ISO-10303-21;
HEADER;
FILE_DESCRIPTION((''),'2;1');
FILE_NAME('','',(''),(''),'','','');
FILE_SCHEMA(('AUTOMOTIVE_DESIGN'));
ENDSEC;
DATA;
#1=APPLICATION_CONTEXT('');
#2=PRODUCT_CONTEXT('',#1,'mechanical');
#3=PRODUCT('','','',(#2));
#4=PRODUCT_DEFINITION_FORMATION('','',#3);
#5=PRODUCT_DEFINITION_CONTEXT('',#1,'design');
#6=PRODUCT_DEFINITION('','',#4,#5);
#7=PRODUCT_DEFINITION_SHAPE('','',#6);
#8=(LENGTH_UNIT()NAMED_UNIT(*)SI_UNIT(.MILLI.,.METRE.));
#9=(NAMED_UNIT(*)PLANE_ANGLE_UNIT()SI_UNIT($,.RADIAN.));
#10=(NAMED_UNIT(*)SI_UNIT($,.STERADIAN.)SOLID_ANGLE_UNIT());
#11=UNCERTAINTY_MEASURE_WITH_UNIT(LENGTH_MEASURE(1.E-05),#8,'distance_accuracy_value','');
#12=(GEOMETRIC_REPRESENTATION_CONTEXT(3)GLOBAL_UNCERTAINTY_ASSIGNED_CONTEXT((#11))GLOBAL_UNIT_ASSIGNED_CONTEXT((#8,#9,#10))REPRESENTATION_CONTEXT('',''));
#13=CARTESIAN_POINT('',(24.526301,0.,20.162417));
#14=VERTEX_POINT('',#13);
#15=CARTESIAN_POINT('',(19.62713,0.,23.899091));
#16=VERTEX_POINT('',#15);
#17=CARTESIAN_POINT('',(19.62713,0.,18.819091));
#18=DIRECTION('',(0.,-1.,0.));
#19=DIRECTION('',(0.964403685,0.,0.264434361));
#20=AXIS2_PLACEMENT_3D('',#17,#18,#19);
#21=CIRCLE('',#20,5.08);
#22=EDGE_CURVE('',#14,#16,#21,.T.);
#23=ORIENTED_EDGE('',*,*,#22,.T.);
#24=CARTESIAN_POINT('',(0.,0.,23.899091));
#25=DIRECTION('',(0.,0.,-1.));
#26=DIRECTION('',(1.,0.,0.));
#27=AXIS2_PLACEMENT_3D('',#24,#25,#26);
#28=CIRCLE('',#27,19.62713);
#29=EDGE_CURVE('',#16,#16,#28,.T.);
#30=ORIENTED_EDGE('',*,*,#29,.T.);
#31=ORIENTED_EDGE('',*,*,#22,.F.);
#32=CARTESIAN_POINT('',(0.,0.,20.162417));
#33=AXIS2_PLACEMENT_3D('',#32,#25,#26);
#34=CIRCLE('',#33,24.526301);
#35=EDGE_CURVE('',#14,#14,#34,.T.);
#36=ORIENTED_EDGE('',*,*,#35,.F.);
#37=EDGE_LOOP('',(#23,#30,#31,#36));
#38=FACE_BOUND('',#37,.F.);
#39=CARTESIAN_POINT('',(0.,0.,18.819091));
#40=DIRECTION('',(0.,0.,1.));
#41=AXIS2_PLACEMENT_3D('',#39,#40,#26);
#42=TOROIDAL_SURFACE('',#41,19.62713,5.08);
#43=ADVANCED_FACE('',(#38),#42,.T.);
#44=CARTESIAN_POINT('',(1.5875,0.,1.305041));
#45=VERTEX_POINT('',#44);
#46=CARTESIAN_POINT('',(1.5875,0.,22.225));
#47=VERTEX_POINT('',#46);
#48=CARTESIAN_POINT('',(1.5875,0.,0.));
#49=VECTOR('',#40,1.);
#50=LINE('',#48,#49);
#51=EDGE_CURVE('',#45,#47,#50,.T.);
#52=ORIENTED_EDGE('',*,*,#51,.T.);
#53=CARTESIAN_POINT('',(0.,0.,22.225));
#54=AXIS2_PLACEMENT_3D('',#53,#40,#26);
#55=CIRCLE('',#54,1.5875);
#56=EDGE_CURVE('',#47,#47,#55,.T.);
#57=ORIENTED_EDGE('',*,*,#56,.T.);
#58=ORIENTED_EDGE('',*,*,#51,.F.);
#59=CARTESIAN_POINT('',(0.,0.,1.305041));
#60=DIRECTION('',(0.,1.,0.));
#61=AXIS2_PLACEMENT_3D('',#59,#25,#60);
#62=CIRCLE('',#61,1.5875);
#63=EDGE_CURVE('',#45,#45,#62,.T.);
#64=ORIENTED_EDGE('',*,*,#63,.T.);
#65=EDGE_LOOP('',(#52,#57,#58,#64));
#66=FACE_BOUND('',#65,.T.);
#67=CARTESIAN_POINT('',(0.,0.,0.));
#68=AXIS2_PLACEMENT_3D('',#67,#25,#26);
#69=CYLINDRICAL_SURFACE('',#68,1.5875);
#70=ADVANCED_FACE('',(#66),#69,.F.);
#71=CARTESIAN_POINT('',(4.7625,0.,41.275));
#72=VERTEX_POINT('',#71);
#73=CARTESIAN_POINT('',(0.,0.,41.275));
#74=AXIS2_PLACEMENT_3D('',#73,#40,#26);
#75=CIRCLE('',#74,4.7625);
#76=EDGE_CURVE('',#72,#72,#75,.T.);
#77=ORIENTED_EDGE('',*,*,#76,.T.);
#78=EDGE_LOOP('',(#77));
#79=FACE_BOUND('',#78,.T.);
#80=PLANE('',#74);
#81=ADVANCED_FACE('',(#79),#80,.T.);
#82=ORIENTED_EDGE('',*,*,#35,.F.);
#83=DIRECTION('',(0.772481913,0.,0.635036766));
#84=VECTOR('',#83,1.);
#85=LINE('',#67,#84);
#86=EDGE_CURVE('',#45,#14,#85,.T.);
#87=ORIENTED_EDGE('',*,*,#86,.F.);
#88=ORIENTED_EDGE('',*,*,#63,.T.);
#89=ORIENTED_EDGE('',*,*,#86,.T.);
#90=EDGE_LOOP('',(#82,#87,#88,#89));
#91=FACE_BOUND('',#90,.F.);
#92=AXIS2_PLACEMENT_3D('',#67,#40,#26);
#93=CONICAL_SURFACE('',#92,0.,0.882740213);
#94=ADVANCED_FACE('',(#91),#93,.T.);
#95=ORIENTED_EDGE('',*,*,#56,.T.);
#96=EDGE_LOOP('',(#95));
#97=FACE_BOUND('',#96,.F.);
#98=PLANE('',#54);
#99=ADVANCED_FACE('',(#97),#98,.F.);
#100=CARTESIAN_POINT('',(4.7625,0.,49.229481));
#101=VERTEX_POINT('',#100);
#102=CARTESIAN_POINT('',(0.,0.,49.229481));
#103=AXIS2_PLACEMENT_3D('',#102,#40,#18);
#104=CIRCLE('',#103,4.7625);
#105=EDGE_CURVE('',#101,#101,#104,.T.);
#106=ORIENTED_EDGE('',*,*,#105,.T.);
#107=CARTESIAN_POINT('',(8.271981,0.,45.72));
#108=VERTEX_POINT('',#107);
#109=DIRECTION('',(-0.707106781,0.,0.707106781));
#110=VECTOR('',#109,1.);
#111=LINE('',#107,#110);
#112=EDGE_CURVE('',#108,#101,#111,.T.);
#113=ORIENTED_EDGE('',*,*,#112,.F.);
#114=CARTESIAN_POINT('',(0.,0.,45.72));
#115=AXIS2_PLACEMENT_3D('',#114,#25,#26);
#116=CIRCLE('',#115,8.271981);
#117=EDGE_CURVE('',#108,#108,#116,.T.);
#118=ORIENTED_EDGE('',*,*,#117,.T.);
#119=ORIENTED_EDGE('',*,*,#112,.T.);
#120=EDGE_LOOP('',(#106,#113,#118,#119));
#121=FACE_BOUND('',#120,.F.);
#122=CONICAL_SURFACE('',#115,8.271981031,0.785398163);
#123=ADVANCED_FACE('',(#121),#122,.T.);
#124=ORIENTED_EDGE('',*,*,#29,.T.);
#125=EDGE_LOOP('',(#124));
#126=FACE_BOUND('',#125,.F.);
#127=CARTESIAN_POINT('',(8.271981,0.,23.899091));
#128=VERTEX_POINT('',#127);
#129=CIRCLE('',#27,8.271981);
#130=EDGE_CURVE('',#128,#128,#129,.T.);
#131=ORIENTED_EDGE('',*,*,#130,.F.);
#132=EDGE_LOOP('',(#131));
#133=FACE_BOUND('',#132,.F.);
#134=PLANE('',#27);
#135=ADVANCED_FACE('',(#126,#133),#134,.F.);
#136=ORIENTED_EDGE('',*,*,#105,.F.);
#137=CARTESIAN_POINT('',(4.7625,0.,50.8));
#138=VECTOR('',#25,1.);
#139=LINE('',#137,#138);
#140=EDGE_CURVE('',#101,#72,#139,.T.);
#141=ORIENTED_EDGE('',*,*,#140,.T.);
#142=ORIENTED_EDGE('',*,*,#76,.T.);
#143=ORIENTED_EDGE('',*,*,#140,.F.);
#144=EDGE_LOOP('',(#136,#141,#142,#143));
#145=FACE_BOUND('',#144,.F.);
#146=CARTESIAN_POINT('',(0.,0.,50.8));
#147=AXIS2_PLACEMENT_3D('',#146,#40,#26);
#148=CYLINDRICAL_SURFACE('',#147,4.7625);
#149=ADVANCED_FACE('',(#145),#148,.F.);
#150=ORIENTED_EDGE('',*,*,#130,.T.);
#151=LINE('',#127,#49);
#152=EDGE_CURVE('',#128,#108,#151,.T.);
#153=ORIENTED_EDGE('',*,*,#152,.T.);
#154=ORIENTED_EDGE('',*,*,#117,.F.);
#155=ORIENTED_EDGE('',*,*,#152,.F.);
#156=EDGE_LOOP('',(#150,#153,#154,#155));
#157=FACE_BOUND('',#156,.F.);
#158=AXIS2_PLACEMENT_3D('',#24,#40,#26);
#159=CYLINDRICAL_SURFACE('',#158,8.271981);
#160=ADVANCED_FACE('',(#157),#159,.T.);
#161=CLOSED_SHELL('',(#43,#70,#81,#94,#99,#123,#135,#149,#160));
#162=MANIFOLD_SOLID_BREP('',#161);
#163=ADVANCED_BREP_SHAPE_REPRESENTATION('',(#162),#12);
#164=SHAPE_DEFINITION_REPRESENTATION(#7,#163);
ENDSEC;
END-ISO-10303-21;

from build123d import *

# Parameters (mm, degrees)
F4_R     = 4.7625
F5_DEPTH = 9.525
F7_R     = 1.5875
F8_DEPTH = 22.225


# Not quite as in the source:
# - a fillet or chamfer that OpenCascade refuses, or shapes differently, is made with other operations: its cross-section is extruded or revolved along the edge and cut away or added


with BuildPart() as f2:
    # F0 (on Front) → F2 (revolve)
    with BuildSketch(Plane.XZ):
        Polygon((0, 50.8), (0, 0), (24.5263007426, 20.1624173125), (24.5263007426, 23.8990907568), (8.2719810307, 23.8990907568), (8.2719810307, 50.8), align=None)
    revolve(axis=Axis((0, 0, 25.4), (0, 0, -1)))

    # F3: fillet of radius 5.08 on 1 edges, made by hand

    # F3_s1 → F3_t2 (revolve, cut)
    with BuildSketch(Plane.XZ):
        with BuildLine():
            ThreePointArc((24.5263007426, 20.1624173125), (22.7079011169, 22.8583047213), (19.6271300205, 23.8990907568))
            Line((19.6271300205, 23.8990907568), (24.5263007426, 23.8990907568))
            Line((24.5263007426, 23.8990907568), (24.5263007426, 20.1624173125))
        make_face()
    revolve(axis=Axis((0, 0, 23.8990907568), (0, 0, -1)), mode=Mode.SUBTRACT)

    # F4 (on face) → F5 (cut)
    with BuildSketch(Plane.XY.offset(50.8)):
        Circle(F4_R)
    extrude(amount=-F5_DEPTH, mode=Mode.SUBTRACT)

    # F6: chamfer of 5.08 on 1 edges, made by hand

    # F6_s1 → F6_t2 (revolve, cut)
    with BuildSketch(Plane.XZ):
        Polygon((8.2719810307, 45.72), (3.1919810307, 50.8), (8.2719810307, 50.8), align=None)
    revolve(axis=Axis((0, 0, 50.8), (0, 0, -1)), mode=Mode.SUBTRACT)

    # F7 (on Top) → F8 (cut)
    with BuildSketch(Plane.XY):
        Circle(F7_R)
    extrude(amount=F8_DEPTH, mode=Mode.SUBTRACT)


solid = f2.part
